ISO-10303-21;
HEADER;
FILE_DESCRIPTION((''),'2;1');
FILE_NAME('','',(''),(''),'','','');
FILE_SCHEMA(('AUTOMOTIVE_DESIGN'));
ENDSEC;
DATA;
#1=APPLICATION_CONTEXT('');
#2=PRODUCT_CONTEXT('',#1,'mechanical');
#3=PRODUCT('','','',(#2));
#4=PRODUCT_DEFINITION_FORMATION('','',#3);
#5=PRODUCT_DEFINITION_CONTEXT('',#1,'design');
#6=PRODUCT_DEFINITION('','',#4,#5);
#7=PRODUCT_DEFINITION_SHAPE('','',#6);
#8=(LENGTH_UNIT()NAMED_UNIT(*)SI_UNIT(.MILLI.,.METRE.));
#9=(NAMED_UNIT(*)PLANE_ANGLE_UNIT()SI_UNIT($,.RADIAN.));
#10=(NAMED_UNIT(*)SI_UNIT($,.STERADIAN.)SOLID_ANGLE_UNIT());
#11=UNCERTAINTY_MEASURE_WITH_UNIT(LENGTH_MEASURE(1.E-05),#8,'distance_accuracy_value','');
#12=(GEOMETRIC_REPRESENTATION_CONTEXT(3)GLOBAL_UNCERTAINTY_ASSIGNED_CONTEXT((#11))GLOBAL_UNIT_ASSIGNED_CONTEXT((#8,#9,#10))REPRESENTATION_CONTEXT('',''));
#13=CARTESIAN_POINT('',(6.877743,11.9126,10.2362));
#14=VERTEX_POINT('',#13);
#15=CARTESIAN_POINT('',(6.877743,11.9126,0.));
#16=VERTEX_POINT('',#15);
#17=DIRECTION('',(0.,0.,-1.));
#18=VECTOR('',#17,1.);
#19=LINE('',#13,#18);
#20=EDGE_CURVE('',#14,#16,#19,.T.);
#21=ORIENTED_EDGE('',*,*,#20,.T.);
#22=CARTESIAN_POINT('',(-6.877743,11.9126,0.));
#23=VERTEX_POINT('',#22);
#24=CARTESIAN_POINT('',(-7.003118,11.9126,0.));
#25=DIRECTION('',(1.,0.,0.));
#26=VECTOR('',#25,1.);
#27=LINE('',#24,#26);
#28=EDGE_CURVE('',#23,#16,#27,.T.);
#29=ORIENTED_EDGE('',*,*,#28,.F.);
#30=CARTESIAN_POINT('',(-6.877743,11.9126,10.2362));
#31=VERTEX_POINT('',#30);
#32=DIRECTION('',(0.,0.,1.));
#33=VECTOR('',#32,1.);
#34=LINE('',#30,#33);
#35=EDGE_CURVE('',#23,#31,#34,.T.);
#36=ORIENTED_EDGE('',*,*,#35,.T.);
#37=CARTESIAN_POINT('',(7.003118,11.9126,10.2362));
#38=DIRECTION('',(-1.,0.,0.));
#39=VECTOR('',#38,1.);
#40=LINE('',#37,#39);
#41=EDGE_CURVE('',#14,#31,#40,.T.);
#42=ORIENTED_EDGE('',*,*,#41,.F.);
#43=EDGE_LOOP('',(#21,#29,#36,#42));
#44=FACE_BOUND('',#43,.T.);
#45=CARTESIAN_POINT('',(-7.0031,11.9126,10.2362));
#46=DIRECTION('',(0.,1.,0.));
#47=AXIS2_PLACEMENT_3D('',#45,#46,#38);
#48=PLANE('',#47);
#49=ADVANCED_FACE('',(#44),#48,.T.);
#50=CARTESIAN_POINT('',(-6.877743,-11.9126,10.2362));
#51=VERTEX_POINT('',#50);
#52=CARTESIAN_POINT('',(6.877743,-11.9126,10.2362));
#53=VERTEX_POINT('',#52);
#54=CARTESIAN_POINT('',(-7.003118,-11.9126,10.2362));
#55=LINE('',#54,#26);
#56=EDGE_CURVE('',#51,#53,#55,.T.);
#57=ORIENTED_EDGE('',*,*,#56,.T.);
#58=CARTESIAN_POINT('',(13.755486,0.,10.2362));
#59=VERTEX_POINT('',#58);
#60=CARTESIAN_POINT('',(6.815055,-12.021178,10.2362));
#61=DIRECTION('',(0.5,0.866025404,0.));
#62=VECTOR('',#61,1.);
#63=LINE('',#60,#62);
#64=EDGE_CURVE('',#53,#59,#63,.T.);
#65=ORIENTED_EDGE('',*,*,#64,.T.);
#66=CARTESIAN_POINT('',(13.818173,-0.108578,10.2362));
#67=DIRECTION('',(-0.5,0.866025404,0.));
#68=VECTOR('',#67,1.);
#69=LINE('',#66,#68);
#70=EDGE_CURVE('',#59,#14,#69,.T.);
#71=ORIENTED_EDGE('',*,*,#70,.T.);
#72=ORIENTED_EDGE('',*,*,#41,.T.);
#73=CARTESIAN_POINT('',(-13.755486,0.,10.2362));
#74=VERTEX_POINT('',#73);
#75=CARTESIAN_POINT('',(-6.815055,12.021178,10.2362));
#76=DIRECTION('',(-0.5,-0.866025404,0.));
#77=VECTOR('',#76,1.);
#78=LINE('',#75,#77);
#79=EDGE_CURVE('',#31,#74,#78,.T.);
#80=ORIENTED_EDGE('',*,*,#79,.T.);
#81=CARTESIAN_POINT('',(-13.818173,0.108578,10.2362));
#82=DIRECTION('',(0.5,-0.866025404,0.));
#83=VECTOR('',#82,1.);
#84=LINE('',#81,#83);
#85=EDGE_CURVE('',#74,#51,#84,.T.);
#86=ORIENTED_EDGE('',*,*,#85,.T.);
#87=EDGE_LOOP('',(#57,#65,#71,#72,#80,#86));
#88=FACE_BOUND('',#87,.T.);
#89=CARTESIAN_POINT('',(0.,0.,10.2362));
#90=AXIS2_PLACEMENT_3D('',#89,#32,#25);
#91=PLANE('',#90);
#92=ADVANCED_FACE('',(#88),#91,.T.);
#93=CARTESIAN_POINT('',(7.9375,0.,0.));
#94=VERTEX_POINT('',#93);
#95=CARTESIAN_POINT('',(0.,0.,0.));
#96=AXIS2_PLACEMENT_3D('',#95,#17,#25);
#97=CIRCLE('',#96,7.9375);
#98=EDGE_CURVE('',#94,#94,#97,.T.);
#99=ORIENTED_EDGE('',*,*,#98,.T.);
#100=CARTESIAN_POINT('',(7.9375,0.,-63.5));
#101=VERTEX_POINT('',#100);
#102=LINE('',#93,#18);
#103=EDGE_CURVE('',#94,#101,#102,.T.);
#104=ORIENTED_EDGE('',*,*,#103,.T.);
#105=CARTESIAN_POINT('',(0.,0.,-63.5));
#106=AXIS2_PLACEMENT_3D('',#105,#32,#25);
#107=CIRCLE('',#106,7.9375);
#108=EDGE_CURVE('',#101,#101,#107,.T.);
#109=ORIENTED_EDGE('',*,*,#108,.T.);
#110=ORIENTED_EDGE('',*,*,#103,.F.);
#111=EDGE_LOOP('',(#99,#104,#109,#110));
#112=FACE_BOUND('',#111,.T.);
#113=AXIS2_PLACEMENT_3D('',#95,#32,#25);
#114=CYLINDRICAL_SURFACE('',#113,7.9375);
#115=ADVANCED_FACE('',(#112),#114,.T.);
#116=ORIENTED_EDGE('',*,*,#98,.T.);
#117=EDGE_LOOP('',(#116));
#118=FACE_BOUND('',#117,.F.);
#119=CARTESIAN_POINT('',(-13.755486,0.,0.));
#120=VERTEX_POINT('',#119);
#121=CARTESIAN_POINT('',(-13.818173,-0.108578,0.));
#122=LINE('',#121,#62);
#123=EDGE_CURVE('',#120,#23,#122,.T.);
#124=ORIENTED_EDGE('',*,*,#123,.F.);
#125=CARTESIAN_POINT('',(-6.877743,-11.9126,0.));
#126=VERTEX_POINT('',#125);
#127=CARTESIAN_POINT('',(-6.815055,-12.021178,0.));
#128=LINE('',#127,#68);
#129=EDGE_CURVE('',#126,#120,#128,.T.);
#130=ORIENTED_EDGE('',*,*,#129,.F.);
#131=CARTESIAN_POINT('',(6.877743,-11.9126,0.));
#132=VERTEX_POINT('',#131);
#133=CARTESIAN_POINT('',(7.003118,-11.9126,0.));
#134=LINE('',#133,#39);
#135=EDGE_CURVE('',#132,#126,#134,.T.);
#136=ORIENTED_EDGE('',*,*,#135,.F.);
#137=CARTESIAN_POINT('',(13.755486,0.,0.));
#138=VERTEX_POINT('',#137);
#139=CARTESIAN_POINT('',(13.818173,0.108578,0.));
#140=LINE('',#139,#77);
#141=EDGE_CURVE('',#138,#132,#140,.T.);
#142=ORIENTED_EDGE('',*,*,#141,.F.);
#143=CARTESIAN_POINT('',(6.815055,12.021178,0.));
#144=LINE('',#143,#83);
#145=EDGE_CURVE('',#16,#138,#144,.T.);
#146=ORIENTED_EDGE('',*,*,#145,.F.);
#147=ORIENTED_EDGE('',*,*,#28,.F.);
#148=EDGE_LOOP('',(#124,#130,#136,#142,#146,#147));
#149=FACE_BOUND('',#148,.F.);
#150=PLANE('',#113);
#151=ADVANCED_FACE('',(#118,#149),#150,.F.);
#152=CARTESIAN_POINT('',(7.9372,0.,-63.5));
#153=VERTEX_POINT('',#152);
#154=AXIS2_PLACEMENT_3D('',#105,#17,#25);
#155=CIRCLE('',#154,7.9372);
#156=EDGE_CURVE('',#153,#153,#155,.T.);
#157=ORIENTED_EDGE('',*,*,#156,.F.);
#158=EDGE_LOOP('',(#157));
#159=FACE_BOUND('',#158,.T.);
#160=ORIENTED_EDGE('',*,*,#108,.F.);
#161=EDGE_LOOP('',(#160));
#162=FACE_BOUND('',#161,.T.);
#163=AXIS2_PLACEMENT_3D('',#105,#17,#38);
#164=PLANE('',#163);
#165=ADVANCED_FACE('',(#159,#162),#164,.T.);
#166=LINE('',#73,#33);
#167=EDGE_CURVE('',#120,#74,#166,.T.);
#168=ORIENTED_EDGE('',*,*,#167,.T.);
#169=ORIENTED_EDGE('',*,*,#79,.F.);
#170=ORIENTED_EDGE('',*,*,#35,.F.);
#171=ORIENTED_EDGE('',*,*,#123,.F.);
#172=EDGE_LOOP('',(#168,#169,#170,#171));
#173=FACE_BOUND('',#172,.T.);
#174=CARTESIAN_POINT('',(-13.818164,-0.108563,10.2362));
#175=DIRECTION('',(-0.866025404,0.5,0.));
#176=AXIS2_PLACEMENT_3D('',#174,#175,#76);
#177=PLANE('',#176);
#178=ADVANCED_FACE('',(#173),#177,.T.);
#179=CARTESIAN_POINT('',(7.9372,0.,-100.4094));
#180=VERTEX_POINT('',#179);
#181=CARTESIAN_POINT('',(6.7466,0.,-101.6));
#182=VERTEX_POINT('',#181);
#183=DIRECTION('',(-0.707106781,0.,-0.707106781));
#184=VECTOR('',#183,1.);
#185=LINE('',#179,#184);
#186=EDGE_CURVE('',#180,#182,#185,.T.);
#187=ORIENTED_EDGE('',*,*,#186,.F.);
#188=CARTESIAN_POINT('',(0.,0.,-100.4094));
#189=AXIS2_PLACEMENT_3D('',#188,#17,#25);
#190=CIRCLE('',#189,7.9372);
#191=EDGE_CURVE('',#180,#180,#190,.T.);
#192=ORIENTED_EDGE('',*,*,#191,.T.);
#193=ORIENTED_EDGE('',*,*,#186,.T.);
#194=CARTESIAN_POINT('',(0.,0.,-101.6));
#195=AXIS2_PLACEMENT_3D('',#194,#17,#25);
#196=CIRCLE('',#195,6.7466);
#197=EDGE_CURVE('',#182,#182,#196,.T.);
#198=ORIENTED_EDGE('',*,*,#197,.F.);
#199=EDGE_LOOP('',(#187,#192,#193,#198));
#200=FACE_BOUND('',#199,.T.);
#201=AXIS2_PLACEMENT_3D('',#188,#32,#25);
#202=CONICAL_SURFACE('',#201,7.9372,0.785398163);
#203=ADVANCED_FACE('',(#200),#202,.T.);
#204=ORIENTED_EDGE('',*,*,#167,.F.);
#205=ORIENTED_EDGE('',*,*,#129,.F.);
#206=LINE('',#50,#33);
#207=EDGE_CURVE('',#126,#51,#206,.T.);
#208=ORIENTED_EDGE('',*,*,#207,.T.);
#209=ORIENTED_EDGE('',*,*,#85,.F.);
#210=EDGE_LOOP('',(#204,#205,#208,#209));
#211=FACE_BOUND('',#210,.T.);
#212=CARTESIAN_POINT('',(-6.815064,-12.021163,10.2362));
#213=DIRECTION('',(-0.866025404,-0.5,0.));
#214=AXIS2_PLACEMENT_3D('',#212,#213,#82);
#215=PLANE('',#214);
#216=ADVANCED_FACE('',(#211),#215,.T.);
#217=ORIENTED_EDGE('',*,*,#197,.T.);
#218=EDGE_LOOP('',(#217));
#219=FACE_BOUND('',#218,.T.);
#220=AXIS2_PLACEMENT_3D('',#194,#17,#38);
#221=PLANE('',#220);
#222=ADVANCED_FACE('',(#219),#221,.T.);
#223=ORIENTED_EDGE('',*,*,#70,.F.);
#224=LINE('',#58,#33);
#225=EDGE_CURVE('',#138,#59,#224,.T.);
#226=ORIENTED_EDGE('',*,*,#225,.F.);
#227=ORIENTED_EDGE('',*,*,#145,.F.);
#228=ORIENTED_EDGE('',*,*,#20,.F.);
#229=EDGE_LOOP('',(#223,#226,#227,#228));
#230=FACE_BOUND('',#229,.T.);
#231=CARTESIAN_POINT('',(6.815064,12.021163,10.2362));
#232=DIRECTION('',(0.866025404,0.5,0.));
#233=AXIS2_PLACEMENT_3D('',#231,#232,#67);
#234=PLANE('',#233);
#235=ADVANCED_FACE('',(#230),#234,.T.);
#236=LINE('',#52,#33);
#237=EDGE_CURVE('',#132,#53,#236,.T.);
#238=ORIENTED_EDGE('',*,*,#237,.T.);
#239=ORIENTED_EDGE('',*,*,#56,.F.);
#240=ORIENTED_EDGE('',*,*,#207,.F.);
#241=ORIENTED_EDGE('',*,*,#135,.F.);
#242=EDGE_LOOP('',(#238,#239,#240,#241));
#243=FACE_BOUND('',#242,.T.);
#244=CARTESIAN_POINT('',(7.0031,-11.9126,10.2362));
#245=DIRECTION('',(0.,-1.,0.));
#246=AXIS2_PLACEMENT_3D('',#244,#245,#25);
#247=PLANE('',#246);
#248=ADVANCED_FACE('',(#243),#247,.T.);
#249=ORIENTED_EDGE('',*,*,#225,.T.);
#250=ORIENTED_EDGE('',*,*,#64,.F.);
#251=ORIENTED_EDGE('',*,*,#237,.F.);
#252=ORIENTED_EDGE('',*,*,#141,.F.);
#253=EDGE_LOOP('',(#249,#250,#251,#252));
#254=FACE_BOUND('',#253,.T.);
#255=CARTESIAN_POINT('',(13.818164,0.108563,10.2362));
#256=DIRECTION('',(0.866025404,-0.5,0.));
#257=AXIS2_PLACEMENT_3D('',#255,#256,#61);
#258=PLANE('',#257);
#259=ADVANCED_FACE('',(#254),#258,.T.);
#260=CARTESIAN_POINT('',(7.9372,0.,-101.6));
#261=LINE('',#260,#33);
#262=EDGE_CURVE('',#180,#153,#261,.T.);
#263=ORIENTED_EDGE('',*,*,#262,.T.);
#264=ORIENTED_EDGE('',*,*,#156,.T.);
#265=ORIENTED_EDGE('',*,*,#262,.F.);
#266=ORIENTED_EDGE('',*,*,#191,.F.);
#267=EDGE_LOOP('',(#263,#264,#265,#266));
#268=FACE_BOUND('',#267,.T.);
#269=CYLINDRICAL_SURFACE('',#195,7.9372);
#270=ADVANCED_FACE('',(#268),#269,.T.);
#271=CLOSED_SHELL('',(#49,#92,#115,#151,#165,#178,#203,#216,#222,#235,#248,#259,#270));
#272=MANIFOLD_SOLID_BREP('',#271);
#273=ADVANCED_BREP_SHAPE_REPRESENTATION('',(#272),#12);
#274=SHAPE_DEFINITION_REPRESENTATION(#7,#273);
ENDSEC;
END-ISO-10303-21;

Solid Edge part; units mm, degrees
sketch "Sketch1" plane through (0, 0, 0) normal (0, 0, 1) x (1, 0, 0)
  circle A0 centre (0, 0) radius 13.8186
  dimension "D1" = 27.6372
extrude "Protrusion1" add sketch "Sketch1" along normal blind 10.2362
sketch "Sketch2" plane through (0, 0, 0) normal (0, 0, -1) x (1, 0, 0)
  circle A0 centre (0, 0) radius 7.9375
extrude "Protrusion2" add sketch "Sketch2" along normal blind 101.6
sketch "Sketch3" plane through (0, 0, -101.6) normal (0, 0, -1) x (1, 0, 0)
  circle A0 centre (0, 0) radius 7.9372
extrude "Cutout1" cut sketch "Sketch3" against normal blind 38.1 flip side to cut
chamfer "Chamfer_1" distance 1.1906 angle 45 1 edges at (-7.9372, 0, -101.6)
sketch "Sketch4" plane through (0, 0, 10.2362) normal (0, 0, 1) x (1, 0, 0)
  line L0 (-7.0031, 11.9126) -> (7.0031, 11.9126)
  dimension "D1" = 23.8252
extrude "Cutout2" cut sketch "Sketch4" against normal up to next material side at (0, 11.9626, 10.2362)
pattern_circular "Pattern1" count 6 over 360 about axis through (0, 0, 10.2362) along (0, 0, 1) of "Cutout2"
properties part number "24100044"
